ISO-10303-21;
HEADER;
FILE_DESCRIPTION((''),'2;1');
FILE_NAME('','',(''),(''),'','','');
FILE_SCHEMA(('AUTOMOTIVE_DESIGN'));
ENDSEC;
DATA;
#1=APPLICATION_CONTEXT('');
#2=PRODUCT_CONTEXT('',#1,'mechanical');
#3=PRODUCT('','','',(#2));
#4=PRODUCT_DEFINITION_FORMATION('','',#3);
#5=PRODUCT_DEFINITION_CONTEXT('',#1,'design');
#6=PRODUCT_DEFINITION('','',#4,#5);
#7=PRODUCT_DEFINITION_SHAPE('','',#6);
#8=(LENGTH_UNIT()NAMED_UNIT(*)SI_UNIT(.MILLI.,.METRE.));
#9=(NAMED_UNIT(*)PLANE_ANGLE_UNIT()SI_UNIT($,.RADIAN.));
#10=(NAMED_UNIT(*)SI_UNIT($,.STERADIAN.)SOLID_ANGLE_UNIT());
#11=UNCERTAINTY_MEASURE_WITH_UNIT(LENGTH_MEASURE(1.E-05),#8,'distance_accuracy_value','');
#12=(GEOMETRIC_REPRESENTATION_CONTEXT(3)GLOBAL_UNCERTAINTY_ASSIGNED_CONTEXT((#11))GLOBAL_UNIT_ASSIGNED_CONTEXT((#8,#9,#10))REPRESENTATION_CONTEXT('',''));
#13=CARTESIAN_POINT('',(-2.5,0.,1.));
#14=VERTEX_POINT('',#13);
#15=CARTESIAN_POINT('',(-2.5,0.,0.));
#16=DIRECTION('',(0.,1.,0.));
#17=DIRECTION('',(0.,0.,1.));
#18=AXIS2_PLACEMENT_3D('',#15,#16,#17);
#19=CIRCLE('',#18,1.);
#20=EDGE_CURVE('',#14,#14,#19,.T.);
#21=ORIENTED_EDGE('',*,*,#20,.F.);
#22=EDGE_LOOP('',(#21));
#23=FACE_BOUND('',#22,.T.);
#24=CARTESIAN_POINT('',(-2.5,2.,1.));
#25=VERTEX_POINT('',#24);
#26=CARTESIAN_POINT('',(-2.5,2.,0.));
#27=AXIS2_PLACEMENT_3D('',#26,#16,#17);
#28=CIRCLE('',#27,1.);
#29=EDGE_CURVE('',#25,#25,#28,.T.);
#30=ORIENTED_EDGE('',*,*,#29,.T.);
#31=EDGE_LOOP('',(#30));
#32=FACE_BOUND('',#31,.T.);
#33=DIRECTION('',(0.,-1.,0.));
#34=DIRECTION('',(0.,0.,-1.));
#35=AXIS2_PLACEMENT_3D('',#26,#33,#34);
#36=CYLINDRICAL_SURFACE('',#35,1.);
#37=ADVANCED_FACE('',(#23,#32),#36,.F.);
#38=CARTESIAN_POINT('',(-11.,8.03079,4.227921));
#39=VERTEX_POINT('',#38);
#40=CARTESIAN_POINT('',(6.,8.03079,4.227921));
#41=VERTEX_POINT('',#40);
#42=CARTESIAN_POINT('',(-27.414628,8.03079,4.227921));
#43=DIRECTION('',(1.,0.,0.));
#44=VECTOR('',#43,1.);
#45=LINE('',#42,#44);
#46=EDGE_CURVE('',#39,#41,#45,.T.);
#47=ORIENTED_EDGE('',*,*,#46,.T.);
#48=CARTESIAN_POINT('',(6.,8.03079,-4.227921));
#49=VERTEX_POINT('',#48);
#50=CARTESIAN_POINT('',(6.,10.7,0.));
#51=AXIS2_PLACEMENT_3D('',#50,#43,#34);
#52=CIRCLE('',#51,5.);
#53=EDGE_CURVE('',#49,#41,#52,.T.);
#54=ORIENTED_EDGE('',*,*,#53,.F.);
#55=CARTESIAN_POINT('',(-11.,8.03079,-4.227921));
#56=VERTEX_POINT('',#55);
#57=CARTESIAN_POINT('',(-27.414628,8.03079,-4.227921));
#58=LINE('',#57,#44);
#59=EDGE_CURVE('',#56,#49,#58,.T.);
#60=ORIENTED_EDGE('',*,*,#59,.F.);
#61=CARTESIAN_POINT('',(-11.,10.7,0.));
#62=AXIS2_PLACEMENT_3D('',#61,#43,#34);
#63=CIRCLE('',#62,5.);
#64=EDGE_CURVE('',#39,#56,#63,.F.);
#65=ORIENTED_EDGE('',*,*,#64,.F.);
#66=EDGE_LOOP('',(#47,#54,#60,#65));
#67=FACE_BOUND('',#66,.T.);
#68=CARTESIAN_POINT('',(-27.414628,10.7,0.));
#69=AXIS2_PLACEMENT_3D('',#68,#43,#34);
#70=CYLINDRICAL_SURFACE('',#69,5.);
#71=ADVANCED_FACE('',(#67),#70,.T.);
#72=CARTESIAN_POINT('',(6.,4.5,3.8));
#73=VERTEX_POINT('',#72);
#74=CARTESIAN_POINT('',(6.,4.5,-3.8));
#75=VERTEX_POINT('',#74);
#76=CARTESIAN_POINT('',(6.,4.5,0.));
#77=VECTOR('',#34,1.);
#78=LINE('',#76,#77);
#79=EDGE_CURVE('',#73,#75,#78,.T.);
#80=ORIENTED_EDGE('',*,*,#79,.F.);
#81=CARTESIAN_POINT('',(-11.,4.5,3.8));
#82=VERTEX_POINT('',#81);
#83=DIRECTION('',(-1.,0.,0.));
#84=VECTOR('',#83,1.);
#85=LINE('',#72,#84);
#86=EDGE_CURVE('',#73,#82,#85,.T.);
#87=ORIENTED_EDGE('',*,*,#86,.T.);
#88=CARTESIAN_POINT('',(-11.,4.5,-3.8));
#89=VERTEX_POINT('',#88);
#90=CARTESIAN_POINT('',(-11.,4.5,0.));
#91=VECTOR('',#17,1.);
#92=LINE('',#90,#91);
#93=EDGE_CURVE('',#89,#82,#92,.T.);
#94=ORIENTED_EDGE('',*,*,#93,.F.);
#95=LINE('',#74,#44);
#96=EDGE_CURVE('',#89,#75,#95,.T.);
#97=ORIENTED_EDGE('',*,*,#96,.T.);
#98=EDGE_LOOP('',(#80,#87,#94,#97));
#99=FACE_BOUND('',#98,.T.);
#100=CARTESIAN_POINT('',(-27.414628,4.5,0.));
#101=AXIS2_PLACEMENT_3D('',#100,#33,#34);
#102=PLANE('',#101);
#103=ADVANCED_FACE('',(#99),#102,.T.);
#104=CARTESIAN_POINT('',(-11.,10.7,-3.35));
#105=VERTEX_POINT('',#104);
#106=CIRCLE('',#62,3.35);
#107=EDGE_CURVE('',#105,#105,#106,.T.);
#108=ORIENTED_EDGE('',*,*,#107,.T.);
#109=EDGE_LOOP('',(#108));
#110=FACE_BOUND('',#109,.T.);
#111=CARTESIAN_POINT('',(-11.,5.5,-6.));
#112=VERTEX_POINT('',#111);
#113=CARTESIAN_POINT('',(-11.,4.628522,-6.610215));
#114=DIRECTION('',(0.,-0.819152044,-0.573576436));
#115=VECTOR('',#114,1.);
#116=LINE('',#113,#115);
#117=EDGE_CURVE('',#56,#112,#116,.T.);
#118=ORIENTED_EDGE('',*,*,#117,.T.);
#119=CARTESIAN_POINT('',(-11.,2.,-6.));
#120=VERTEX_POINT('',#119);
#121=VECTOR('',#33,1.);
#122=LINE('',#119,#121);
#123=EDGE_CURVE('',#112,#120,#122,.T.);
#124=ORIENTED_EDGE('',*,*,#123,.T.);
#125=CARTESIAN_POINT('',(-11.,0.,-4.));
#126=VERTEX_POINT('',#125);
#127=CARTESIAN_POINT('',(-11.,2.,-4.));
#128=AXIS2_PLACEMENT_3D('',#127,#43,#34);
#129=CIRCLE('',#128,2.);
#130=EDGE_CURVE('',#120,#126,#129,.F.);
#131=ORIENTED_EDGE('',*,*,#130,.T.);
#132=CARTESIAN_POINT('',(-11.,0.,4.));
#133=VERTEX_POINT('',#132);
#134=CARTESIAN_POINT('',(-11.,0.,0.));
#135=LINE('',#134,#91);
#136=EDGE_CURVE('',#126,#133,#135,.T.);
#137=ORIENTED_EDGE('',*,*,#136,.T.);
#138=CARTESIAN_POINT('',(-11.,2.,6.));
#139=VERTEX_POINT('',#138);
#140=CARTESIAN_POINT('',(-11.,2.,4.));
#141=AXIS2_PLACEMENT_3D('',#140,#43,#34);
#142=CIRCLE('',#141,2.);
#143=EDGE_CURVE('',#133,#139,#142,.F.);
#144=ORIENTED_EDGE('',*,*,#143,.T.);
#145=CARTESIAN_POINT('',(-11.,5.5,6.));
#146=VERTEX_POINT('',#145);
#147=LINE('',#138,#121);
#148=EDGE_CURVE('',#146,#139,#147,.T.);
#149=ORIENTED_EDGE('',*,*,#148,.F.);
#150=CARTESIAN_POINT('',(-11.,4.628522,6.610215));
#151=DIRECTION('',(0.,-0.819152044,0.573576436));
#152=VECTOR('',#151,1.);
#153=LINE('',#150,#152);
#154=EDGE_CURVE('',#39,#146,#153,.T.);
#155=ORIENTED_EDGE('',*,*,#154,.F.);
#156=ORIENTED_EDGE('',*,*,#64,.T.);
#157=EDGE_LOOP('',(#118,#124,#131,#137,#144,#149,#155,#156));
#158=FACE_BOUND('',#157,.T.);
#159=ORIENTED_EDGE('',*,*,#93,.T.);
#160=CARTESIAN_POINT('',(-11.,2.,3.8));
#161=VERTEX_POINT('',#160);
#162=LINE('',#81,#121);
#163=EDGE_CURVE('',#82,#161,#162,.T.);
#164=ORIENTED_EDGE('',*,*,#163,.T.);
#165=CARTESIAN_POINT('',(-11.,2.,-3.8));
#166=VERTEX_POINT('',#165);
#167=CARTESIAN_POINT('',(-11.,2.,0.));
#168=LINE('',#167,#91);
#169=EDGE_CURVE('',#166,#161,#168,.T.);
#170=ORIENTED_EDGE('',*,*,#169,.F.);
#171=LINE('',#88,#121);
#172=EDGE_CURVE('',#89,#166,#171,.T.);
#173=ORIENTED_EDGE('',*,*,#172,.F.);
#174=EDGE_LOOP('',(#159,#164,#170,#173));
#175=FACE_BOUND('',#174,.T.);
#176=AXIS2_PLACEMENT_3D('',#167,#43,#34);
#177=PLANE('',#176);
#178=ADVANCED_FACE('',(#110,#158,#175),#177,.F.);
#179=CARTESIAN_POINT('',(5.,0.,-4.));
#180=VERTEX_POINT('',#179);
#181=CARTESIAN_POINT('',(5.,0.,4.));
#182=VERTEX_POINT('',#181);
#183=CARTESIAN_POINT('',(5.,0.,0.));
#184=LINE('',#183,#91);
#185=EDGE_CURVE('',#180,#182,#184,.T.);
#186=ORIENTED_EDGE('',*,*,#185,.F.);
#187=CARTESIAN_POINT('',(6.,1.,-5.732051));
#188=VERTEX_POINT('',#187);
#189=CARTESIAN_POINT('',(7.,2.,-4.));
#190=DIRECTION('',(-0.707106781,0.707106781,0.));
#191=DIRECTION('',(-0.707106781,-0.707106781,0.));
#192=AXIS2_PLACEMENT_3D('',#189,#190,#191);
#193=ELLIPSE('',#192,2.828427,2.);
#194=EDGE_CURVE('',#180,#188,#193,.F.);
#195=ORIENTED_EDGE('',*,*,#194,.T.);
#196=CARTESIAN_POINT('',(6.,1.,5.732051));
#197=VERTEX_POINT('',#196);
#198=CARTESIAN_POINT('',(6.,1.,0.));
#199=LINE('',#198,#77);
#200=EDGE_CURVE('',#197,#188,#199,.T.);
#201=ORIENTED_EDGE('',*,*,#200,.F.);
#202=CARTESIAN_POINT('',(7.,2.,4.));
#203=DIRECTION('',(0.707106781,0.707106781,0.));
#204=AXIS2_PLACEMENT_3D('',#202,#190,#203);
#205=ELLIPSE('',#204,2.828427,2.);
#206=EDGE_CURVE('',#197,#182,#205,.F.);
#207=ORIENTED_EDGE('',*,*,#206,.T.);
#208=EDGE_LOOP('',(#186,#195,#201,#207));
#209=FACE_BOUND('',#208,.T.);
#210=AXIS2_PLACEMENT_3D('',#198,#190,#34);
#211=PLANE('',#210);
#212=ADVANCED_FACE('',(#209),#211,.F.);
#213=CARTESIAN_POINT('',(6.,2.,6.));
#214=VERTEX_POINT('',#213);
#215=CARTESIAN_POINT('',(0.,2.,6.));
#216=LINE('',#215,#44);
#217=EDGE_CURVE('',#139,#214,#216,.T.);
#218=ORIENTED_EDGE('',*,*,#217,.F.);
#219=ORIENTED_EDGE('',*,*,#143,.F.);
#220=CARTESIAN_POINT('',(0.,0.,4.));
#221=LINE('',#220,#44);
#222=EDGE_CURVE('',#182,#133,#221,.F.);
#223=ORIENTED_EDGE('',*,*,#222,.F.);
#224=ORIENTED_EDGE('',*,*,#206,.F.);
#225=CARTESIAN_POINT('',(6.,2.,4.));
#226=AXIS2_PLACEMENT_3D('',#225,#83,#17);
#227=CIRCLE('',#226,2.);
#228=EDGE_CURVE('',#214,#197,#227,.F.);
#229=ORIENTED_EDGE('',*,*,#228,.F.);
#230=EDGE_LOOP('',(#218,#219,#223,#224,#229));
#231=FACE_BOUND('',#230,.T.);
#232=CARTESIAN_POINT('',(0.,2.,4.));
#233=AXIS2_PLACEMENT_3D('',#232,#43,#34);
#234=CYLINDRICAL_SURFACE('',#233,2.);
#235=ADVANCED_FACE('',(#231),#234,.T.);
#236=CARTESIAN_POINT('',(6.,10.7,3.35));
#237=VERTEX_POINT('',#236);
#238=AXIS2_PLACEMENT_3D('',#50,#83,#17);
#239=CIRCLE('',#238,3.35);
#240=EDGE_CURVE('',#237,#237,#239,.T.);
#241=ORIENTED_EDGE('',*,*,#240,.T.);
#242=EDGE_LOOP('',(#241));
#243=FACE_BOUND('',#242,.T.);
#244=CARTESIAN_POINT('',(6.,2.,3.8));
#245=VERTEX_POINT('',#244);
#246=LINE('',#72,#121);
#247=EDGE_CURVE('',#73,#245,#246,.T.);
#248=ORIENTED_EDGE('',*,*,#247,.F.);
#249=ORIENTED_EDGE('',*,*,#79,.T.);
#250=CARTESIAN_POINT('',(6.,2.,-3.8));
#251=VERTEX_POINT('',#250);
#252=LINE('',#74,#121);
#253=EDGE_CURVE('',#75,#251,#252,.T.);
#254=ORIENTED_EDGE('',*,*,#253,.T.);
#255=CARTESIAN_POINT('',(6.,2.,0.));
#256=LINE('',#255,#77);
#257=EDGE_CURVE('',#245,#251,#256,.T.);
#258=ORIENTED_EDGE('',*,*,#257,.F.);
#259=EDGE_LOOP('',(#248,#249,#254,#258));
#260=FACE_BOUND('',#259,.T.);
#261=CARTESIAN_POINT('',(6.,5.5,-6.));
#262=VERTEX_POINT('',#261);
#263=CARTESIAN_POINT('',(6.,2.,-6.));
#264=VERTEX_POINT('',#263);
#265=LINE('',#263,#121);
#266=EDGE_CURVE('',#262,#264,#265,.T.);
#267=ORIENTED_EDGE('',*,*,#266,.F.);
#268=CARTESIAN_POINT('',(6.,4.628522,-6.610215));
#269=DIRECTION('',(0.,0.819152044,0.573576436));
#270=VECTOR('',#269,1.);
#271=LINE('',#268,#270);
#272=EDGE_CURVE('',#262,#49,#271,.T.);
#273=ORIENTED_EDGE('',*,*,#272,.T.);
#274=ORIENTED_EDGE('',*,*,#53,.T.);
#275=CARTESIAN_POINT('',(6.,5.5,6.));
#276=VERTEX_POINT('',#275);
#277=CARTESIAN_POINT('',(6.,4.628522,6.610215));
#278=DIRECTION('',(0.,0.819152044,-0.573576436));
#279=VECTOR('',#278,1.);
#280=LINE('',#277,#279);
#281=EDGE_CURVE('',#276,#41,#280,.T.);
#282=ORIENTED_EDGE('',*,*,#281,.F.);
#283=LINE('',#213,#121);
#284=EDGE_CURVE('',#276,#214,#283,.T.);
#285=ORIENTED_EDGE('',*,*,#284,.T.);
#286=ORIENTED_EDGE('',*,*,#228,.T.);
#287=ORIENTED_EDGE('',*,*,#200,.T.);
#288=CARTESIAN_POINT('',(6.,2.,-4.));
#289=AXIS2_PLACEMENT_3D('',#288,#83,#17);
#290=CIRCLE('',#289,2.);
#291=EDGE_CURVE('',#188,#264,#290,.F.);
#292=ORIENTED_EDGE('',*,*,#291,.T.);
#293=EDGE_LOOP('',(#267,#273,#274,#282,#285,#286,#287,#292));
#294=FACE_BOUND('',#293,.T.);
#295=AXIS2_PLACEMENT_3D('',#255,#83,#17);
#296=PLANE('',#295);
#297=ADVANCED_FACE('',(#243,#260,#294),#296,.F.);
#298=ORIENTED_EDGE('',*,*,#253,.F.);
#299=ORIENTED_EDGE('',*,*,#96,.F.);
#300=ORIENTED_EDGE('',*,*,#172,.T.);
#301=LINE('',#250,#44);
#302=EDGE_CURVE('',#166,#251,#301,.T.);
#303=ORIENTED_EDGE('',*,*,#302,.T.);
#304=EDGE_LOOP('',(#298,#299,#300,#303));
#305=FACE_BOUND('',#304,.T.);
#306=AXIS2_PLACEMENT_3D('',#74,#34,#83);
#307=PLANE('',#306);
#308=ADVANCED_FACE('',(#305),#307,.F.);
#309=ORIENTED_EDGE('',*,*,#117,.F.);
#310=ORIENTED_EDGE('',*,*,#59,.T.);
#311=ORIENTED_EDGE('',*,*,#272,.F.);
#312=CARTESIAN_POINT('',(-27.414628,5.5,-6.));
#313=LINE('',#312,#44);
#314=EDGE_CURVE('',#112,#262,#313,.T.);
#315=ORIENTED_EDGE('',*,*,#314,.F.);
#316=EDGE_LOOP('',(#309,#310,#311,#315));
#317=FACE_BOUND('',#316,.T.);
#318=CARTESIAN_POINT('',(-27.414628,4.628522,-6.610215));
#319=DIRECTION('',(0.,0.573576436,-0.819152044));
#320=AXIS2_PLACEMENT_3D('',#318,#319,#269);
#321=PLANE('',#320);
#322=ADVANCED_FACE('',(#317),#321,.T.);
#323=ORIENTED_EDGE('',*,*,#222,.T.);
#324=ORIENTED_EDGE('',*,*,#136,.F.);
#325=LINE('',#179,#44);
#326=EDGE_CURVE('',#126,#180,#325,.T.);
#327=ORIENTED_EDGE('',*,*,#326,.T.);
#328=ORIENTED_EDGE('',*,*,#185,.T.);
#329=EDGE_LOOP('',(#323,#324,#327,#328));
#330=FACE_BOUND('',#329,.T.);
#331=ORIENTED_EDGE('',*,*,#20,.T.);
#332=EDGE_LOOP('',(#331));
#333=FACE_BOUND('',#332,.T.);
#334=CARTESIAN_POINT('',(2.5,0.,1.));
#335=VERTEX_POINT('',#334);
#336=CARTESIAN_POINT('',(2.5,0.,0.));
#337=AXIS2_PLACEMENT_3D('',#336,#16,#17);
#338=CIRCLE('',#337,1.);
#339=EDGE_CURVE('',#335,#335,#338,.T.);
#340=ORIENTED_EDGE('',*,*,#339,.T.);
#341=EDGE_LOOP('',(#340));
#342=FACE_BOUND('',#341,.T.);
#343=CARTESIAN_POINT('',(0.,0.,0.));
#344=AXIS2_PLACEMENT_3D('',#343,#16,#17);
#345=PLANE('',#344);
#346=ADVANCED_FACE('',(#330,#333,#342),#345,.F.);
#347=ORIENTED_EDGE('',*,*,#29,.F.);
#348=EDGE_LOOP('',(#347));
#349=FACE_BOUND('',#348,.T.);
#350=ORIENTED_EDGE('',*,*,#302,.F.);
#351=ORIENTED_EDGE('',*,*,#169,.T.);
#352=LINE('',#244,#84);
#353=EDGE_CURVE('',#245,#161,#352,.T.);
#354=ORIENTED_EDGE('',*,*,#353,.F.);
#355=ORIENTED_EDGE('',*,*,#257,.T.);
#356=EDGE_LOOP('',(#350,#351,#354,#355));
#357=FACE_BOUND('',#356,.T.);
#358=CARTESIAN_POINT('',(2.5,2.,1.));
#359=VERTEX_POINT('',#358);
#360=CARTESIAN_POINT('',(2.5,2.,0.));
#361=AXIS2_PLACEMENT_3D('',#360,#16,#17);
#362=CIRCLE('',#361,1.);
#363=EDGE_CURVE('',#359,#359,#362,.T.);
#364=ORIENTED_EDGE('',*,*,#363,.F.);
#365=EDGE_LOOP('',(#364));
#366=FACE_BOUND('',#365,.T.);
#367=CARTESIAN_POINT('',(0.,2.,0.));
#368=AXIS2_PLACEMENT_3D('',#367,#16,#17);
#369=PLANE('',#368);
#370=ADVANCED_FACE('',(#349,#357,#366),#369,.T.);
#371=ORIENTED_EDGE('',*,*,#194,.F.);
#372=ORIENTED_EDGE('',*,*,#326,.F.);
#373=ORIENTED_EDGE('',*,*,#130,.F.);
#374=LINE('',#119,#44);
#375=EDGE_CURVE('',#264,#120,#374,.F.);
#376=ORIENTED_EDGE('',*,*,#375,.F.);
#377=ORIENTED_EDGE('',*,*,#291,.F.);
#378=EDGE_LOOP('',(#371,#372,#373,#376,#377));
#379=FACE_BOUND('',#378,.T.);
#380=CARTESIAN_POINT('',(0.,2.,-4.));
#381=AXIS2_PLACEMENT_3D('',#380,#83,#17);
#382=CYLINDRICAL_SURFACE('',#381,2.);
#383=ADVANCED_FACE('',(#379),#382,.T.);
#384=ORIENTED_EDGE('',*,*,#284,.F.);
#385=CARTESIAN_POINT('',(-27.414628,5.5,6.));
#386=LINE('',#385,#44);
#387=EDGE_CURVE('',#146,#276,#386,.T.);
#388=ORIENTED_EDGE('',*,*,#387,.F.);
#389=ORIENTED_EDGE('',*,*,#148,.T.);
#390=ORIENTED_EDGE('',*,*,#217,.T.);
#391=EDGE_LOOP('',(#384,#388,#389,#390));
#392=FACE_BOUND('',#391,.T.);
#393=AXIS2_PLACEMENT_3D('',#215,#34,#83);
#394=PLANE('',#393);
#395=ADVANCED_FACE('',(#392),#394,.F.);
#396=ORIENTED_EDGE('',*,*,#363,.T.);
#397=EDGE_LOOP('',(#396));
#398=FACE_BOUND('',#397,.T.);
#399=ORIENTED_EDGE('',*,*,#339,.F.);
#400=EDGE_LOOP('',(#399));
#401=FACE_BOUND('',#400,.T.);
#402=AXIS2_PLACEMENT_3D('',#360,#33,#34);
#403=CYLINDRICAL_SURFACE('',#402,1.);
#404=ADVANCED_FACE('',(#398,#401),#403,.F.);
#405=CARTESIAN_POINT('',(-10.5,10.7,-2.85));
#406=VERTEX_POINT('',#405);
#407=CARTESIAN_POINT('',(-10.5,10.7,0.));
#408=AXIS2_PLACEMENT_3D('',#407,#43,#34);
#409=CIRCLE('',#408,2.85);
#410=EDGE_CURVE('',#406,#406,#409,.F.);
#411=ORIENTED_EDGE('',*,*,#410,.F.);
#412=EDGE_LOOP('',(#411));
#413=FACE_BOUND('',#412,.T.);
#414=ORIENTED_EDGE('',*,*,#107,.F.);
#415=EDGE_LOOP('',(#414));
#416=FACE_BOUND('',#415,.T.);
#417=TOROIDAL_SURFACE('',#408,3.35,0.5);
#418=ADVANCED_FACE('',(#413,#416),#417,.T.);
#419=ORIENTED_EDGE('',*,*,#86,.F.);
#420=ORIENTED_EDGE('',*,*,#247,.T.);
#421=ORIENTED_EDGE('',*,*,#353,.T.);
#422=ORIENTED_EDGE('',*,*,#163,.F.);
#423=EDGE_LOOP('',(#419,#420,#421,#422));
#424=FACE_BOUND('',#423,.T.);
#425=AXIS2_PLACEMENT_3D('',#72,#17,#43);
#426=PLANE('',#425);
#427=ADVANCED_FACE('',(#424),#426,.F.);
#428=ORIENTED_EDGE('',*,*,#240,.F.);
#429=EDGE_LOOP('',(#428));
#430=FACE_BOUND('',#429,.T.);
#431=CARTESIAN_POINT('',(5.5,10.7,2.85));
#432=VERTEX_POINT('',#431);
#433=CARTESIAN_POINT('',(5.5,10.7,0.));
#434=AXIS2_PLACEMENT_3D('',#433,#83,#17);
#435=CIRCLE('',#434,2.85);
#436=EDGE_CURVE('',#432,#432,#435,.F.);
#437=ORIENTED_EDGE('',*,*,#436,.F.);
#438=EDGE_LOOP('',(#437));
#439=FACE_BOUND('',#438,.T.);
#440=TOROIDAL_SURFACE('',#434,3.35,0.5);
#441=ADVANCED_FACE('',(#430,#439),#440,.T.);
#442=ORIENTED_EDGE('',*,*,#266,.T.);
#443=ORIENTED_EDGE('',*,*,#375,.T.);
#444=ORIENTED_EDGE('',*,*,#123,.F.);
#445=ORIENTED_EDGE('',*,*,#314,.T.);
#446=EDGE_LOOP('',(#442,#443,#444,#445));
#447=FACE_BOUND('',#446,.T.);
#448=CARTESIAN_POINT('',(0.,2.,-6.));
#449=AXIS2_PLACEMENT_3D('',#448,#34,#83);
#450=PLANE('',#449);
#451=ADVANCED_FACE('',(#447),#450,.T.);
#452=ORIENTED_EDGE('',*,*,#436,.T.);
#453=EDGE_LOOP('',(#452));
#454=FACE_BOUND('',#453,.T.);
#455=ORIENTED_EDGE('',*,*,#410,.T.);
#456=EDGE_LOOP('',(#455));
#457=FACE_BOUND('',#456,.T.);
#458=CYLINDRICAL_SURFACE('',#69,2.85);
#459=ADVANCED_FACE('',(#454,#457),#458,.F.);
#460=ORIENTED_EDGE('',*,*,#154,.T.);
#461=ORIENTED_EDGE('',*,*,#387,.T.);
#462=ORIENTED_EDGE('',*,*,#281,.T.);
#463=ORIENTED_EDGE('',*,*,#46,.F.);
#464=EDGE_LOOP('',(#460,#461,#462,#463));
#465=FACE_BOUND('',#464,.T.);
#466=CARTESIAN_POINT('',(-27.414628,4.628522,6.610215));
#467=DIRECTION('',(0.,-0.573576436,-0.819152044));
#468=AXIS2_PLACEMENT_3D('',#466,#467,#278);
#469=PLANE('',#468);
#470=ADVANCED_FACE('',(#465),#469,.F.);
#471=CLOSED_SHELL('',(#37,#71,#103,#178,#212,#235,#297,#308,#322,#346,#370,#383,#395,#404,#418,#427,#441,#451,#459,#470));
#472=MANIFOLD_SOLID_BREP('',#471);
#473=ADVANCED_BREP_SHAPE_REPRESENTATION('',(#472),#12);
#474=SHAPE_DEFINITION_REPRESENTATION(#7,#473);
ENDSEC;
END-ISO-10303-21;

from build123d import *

# Parameters (mm, degrees)
SKETCH_1_W      = 12
SKETCH_1_H      = 12
SKETCH_1_R      = 1
SKETCH_1_W_2    = 5
EXTRUDE_1_DEPTH = 2
SKETCH_2_W      = 17
SKETCH_2_H      = 2.2
EXTRUDE_2_DEPTH = 2.5
EXTRUDE_3_DEPTH = 17
CHAMFER_1_SIZE  = 1
FILLET_4_R      = 2


with BuildPart() as part:
    # 草图1 → 凸台-拉伸1 (new body)
    # profile 1 of 2: a face of its own
    with BuildSketch(Plane(origin=(0, 0, 0), x_dir=(1, 0, 0), z_dir=(0, 1, 0))):
        Rectangle(SKETCH_1_W, SKETCH_1_H)
        with Locations(Location((2.5, 0, 0), (0, 0, 270))):
            Circle(SKETCH_1_R, mode=Mode.SUBTRACT)
        with Locations(Location((-2.5, 0, 0), (0, 0, 270))):
            Circle(SKETCH_1_R, mode=Mode.SUBTRACT)
    # profile 2 of 2: a face of its own
    with BuildSketch(Plane(origin=(0, 0, 0), x_dir=(1, 0, 0), z_dir=(0, 1, 0))):
        with Locations((-8.5, 0)):
            Rectangle(SKETCH_1_W_2, SKETCH_1_H)
    extrude(amount=EXTRUDE_1_DEPTH)

    # 草图2 → 凸台-拉伸2 (add)
    with BuildSketch(Plane(origin=(0, 2, 0), x_dir=(1, 0, 0), z_dir=(0, 1, 0))):
        with Locations((-2.5, 4.9)):
            Rectangle(SKETCH_2_W, SKETCH_2_H)
        with Locations((-2.5, -4.9)):
            Rectangle(SKETCH_2_W, SKETCH_2_H)
    extrude(amount=EXTRUDE_2_DEPTH)

    # 草图4 → 凸台-拉伸3 (add)
    with BuildSketch(Plane(origin=(6, 0, 0), x_dir=(0, 0, -1), z_dir=(1, 0, 0))):
        with BuildLine():
            Line((-6, 5.5), (-6, 4.5))
            Line((-6, 4.5), (6, 4.5))
            Line((6, 4.5), (6, 5.5))
            Line((6, 5.5), (4.227921486, 8.030790397))
            ThreePointArc((4.227921486, 8.030790397), (0, 15.7), (-4.227921486, 8.030790397))
            Line((-4.227921486, 8.030790397), (-6, 5.5))
        make_face()
        with BuildLine():
            ThreePointArc((0, 7.85), (-2.85, 10.7), (0, 13.55))
            ThreePointArc((0, 13.55), (2.85, 10.7), (0, 7.85))
        make_face(mode=Mode.SUBTRACT)
    extrude(amount=-EXTRUDE_3_DEPTH)

    # 圆角1: read off the stored shape, not the designer's step
    # 圆角1 outline → 圆角1 (revolve, cut)
    with BuildSketch(Plane(origin=(0, 10.7, 0), x_dir=(0, 1, 0), z_dir=(0, 0, -1))):
        with BuildLine():
            Line((2.85, 6), (2.85, 5.5))
            ThreePointArc((2.85, 5.5), (2.996446609, 5.853553391), (3.35, 6))
            Line((3.35, 6), (2.85, 6))
        make_face()
        with BuildLine():
            ThreePointArc((3.35, -11), (2.996446609, -10.853553391), (2.85, -10.5))
            Line((2.85, -10.5), (2.85, -11))
            Line((2.85, -11), (3.35, -11))
        make_face()
    revolve(axis=Axis((0, 10.7, 0), (1, 0, 0)), mode=Mode.SUBTRACT)

    # 倒角1
    chamfer_1_edges = [part.edges().sort_by_distance(p)[0] for p in [
        (6, 0, 0),
    ]]
    chamfer(chamfer_1_edges, length=CHAMFER_1_SIZE)

    # 圆角4
    fillet_4_edges = [part.edges().sort_by_distance(p)[0] for p in [
        (-3, 0, -6),
        (-3, 0, 6),
    ]]
    fillet(fillet_4_edges, radius=FILLET_4_R)


solid = part.part
